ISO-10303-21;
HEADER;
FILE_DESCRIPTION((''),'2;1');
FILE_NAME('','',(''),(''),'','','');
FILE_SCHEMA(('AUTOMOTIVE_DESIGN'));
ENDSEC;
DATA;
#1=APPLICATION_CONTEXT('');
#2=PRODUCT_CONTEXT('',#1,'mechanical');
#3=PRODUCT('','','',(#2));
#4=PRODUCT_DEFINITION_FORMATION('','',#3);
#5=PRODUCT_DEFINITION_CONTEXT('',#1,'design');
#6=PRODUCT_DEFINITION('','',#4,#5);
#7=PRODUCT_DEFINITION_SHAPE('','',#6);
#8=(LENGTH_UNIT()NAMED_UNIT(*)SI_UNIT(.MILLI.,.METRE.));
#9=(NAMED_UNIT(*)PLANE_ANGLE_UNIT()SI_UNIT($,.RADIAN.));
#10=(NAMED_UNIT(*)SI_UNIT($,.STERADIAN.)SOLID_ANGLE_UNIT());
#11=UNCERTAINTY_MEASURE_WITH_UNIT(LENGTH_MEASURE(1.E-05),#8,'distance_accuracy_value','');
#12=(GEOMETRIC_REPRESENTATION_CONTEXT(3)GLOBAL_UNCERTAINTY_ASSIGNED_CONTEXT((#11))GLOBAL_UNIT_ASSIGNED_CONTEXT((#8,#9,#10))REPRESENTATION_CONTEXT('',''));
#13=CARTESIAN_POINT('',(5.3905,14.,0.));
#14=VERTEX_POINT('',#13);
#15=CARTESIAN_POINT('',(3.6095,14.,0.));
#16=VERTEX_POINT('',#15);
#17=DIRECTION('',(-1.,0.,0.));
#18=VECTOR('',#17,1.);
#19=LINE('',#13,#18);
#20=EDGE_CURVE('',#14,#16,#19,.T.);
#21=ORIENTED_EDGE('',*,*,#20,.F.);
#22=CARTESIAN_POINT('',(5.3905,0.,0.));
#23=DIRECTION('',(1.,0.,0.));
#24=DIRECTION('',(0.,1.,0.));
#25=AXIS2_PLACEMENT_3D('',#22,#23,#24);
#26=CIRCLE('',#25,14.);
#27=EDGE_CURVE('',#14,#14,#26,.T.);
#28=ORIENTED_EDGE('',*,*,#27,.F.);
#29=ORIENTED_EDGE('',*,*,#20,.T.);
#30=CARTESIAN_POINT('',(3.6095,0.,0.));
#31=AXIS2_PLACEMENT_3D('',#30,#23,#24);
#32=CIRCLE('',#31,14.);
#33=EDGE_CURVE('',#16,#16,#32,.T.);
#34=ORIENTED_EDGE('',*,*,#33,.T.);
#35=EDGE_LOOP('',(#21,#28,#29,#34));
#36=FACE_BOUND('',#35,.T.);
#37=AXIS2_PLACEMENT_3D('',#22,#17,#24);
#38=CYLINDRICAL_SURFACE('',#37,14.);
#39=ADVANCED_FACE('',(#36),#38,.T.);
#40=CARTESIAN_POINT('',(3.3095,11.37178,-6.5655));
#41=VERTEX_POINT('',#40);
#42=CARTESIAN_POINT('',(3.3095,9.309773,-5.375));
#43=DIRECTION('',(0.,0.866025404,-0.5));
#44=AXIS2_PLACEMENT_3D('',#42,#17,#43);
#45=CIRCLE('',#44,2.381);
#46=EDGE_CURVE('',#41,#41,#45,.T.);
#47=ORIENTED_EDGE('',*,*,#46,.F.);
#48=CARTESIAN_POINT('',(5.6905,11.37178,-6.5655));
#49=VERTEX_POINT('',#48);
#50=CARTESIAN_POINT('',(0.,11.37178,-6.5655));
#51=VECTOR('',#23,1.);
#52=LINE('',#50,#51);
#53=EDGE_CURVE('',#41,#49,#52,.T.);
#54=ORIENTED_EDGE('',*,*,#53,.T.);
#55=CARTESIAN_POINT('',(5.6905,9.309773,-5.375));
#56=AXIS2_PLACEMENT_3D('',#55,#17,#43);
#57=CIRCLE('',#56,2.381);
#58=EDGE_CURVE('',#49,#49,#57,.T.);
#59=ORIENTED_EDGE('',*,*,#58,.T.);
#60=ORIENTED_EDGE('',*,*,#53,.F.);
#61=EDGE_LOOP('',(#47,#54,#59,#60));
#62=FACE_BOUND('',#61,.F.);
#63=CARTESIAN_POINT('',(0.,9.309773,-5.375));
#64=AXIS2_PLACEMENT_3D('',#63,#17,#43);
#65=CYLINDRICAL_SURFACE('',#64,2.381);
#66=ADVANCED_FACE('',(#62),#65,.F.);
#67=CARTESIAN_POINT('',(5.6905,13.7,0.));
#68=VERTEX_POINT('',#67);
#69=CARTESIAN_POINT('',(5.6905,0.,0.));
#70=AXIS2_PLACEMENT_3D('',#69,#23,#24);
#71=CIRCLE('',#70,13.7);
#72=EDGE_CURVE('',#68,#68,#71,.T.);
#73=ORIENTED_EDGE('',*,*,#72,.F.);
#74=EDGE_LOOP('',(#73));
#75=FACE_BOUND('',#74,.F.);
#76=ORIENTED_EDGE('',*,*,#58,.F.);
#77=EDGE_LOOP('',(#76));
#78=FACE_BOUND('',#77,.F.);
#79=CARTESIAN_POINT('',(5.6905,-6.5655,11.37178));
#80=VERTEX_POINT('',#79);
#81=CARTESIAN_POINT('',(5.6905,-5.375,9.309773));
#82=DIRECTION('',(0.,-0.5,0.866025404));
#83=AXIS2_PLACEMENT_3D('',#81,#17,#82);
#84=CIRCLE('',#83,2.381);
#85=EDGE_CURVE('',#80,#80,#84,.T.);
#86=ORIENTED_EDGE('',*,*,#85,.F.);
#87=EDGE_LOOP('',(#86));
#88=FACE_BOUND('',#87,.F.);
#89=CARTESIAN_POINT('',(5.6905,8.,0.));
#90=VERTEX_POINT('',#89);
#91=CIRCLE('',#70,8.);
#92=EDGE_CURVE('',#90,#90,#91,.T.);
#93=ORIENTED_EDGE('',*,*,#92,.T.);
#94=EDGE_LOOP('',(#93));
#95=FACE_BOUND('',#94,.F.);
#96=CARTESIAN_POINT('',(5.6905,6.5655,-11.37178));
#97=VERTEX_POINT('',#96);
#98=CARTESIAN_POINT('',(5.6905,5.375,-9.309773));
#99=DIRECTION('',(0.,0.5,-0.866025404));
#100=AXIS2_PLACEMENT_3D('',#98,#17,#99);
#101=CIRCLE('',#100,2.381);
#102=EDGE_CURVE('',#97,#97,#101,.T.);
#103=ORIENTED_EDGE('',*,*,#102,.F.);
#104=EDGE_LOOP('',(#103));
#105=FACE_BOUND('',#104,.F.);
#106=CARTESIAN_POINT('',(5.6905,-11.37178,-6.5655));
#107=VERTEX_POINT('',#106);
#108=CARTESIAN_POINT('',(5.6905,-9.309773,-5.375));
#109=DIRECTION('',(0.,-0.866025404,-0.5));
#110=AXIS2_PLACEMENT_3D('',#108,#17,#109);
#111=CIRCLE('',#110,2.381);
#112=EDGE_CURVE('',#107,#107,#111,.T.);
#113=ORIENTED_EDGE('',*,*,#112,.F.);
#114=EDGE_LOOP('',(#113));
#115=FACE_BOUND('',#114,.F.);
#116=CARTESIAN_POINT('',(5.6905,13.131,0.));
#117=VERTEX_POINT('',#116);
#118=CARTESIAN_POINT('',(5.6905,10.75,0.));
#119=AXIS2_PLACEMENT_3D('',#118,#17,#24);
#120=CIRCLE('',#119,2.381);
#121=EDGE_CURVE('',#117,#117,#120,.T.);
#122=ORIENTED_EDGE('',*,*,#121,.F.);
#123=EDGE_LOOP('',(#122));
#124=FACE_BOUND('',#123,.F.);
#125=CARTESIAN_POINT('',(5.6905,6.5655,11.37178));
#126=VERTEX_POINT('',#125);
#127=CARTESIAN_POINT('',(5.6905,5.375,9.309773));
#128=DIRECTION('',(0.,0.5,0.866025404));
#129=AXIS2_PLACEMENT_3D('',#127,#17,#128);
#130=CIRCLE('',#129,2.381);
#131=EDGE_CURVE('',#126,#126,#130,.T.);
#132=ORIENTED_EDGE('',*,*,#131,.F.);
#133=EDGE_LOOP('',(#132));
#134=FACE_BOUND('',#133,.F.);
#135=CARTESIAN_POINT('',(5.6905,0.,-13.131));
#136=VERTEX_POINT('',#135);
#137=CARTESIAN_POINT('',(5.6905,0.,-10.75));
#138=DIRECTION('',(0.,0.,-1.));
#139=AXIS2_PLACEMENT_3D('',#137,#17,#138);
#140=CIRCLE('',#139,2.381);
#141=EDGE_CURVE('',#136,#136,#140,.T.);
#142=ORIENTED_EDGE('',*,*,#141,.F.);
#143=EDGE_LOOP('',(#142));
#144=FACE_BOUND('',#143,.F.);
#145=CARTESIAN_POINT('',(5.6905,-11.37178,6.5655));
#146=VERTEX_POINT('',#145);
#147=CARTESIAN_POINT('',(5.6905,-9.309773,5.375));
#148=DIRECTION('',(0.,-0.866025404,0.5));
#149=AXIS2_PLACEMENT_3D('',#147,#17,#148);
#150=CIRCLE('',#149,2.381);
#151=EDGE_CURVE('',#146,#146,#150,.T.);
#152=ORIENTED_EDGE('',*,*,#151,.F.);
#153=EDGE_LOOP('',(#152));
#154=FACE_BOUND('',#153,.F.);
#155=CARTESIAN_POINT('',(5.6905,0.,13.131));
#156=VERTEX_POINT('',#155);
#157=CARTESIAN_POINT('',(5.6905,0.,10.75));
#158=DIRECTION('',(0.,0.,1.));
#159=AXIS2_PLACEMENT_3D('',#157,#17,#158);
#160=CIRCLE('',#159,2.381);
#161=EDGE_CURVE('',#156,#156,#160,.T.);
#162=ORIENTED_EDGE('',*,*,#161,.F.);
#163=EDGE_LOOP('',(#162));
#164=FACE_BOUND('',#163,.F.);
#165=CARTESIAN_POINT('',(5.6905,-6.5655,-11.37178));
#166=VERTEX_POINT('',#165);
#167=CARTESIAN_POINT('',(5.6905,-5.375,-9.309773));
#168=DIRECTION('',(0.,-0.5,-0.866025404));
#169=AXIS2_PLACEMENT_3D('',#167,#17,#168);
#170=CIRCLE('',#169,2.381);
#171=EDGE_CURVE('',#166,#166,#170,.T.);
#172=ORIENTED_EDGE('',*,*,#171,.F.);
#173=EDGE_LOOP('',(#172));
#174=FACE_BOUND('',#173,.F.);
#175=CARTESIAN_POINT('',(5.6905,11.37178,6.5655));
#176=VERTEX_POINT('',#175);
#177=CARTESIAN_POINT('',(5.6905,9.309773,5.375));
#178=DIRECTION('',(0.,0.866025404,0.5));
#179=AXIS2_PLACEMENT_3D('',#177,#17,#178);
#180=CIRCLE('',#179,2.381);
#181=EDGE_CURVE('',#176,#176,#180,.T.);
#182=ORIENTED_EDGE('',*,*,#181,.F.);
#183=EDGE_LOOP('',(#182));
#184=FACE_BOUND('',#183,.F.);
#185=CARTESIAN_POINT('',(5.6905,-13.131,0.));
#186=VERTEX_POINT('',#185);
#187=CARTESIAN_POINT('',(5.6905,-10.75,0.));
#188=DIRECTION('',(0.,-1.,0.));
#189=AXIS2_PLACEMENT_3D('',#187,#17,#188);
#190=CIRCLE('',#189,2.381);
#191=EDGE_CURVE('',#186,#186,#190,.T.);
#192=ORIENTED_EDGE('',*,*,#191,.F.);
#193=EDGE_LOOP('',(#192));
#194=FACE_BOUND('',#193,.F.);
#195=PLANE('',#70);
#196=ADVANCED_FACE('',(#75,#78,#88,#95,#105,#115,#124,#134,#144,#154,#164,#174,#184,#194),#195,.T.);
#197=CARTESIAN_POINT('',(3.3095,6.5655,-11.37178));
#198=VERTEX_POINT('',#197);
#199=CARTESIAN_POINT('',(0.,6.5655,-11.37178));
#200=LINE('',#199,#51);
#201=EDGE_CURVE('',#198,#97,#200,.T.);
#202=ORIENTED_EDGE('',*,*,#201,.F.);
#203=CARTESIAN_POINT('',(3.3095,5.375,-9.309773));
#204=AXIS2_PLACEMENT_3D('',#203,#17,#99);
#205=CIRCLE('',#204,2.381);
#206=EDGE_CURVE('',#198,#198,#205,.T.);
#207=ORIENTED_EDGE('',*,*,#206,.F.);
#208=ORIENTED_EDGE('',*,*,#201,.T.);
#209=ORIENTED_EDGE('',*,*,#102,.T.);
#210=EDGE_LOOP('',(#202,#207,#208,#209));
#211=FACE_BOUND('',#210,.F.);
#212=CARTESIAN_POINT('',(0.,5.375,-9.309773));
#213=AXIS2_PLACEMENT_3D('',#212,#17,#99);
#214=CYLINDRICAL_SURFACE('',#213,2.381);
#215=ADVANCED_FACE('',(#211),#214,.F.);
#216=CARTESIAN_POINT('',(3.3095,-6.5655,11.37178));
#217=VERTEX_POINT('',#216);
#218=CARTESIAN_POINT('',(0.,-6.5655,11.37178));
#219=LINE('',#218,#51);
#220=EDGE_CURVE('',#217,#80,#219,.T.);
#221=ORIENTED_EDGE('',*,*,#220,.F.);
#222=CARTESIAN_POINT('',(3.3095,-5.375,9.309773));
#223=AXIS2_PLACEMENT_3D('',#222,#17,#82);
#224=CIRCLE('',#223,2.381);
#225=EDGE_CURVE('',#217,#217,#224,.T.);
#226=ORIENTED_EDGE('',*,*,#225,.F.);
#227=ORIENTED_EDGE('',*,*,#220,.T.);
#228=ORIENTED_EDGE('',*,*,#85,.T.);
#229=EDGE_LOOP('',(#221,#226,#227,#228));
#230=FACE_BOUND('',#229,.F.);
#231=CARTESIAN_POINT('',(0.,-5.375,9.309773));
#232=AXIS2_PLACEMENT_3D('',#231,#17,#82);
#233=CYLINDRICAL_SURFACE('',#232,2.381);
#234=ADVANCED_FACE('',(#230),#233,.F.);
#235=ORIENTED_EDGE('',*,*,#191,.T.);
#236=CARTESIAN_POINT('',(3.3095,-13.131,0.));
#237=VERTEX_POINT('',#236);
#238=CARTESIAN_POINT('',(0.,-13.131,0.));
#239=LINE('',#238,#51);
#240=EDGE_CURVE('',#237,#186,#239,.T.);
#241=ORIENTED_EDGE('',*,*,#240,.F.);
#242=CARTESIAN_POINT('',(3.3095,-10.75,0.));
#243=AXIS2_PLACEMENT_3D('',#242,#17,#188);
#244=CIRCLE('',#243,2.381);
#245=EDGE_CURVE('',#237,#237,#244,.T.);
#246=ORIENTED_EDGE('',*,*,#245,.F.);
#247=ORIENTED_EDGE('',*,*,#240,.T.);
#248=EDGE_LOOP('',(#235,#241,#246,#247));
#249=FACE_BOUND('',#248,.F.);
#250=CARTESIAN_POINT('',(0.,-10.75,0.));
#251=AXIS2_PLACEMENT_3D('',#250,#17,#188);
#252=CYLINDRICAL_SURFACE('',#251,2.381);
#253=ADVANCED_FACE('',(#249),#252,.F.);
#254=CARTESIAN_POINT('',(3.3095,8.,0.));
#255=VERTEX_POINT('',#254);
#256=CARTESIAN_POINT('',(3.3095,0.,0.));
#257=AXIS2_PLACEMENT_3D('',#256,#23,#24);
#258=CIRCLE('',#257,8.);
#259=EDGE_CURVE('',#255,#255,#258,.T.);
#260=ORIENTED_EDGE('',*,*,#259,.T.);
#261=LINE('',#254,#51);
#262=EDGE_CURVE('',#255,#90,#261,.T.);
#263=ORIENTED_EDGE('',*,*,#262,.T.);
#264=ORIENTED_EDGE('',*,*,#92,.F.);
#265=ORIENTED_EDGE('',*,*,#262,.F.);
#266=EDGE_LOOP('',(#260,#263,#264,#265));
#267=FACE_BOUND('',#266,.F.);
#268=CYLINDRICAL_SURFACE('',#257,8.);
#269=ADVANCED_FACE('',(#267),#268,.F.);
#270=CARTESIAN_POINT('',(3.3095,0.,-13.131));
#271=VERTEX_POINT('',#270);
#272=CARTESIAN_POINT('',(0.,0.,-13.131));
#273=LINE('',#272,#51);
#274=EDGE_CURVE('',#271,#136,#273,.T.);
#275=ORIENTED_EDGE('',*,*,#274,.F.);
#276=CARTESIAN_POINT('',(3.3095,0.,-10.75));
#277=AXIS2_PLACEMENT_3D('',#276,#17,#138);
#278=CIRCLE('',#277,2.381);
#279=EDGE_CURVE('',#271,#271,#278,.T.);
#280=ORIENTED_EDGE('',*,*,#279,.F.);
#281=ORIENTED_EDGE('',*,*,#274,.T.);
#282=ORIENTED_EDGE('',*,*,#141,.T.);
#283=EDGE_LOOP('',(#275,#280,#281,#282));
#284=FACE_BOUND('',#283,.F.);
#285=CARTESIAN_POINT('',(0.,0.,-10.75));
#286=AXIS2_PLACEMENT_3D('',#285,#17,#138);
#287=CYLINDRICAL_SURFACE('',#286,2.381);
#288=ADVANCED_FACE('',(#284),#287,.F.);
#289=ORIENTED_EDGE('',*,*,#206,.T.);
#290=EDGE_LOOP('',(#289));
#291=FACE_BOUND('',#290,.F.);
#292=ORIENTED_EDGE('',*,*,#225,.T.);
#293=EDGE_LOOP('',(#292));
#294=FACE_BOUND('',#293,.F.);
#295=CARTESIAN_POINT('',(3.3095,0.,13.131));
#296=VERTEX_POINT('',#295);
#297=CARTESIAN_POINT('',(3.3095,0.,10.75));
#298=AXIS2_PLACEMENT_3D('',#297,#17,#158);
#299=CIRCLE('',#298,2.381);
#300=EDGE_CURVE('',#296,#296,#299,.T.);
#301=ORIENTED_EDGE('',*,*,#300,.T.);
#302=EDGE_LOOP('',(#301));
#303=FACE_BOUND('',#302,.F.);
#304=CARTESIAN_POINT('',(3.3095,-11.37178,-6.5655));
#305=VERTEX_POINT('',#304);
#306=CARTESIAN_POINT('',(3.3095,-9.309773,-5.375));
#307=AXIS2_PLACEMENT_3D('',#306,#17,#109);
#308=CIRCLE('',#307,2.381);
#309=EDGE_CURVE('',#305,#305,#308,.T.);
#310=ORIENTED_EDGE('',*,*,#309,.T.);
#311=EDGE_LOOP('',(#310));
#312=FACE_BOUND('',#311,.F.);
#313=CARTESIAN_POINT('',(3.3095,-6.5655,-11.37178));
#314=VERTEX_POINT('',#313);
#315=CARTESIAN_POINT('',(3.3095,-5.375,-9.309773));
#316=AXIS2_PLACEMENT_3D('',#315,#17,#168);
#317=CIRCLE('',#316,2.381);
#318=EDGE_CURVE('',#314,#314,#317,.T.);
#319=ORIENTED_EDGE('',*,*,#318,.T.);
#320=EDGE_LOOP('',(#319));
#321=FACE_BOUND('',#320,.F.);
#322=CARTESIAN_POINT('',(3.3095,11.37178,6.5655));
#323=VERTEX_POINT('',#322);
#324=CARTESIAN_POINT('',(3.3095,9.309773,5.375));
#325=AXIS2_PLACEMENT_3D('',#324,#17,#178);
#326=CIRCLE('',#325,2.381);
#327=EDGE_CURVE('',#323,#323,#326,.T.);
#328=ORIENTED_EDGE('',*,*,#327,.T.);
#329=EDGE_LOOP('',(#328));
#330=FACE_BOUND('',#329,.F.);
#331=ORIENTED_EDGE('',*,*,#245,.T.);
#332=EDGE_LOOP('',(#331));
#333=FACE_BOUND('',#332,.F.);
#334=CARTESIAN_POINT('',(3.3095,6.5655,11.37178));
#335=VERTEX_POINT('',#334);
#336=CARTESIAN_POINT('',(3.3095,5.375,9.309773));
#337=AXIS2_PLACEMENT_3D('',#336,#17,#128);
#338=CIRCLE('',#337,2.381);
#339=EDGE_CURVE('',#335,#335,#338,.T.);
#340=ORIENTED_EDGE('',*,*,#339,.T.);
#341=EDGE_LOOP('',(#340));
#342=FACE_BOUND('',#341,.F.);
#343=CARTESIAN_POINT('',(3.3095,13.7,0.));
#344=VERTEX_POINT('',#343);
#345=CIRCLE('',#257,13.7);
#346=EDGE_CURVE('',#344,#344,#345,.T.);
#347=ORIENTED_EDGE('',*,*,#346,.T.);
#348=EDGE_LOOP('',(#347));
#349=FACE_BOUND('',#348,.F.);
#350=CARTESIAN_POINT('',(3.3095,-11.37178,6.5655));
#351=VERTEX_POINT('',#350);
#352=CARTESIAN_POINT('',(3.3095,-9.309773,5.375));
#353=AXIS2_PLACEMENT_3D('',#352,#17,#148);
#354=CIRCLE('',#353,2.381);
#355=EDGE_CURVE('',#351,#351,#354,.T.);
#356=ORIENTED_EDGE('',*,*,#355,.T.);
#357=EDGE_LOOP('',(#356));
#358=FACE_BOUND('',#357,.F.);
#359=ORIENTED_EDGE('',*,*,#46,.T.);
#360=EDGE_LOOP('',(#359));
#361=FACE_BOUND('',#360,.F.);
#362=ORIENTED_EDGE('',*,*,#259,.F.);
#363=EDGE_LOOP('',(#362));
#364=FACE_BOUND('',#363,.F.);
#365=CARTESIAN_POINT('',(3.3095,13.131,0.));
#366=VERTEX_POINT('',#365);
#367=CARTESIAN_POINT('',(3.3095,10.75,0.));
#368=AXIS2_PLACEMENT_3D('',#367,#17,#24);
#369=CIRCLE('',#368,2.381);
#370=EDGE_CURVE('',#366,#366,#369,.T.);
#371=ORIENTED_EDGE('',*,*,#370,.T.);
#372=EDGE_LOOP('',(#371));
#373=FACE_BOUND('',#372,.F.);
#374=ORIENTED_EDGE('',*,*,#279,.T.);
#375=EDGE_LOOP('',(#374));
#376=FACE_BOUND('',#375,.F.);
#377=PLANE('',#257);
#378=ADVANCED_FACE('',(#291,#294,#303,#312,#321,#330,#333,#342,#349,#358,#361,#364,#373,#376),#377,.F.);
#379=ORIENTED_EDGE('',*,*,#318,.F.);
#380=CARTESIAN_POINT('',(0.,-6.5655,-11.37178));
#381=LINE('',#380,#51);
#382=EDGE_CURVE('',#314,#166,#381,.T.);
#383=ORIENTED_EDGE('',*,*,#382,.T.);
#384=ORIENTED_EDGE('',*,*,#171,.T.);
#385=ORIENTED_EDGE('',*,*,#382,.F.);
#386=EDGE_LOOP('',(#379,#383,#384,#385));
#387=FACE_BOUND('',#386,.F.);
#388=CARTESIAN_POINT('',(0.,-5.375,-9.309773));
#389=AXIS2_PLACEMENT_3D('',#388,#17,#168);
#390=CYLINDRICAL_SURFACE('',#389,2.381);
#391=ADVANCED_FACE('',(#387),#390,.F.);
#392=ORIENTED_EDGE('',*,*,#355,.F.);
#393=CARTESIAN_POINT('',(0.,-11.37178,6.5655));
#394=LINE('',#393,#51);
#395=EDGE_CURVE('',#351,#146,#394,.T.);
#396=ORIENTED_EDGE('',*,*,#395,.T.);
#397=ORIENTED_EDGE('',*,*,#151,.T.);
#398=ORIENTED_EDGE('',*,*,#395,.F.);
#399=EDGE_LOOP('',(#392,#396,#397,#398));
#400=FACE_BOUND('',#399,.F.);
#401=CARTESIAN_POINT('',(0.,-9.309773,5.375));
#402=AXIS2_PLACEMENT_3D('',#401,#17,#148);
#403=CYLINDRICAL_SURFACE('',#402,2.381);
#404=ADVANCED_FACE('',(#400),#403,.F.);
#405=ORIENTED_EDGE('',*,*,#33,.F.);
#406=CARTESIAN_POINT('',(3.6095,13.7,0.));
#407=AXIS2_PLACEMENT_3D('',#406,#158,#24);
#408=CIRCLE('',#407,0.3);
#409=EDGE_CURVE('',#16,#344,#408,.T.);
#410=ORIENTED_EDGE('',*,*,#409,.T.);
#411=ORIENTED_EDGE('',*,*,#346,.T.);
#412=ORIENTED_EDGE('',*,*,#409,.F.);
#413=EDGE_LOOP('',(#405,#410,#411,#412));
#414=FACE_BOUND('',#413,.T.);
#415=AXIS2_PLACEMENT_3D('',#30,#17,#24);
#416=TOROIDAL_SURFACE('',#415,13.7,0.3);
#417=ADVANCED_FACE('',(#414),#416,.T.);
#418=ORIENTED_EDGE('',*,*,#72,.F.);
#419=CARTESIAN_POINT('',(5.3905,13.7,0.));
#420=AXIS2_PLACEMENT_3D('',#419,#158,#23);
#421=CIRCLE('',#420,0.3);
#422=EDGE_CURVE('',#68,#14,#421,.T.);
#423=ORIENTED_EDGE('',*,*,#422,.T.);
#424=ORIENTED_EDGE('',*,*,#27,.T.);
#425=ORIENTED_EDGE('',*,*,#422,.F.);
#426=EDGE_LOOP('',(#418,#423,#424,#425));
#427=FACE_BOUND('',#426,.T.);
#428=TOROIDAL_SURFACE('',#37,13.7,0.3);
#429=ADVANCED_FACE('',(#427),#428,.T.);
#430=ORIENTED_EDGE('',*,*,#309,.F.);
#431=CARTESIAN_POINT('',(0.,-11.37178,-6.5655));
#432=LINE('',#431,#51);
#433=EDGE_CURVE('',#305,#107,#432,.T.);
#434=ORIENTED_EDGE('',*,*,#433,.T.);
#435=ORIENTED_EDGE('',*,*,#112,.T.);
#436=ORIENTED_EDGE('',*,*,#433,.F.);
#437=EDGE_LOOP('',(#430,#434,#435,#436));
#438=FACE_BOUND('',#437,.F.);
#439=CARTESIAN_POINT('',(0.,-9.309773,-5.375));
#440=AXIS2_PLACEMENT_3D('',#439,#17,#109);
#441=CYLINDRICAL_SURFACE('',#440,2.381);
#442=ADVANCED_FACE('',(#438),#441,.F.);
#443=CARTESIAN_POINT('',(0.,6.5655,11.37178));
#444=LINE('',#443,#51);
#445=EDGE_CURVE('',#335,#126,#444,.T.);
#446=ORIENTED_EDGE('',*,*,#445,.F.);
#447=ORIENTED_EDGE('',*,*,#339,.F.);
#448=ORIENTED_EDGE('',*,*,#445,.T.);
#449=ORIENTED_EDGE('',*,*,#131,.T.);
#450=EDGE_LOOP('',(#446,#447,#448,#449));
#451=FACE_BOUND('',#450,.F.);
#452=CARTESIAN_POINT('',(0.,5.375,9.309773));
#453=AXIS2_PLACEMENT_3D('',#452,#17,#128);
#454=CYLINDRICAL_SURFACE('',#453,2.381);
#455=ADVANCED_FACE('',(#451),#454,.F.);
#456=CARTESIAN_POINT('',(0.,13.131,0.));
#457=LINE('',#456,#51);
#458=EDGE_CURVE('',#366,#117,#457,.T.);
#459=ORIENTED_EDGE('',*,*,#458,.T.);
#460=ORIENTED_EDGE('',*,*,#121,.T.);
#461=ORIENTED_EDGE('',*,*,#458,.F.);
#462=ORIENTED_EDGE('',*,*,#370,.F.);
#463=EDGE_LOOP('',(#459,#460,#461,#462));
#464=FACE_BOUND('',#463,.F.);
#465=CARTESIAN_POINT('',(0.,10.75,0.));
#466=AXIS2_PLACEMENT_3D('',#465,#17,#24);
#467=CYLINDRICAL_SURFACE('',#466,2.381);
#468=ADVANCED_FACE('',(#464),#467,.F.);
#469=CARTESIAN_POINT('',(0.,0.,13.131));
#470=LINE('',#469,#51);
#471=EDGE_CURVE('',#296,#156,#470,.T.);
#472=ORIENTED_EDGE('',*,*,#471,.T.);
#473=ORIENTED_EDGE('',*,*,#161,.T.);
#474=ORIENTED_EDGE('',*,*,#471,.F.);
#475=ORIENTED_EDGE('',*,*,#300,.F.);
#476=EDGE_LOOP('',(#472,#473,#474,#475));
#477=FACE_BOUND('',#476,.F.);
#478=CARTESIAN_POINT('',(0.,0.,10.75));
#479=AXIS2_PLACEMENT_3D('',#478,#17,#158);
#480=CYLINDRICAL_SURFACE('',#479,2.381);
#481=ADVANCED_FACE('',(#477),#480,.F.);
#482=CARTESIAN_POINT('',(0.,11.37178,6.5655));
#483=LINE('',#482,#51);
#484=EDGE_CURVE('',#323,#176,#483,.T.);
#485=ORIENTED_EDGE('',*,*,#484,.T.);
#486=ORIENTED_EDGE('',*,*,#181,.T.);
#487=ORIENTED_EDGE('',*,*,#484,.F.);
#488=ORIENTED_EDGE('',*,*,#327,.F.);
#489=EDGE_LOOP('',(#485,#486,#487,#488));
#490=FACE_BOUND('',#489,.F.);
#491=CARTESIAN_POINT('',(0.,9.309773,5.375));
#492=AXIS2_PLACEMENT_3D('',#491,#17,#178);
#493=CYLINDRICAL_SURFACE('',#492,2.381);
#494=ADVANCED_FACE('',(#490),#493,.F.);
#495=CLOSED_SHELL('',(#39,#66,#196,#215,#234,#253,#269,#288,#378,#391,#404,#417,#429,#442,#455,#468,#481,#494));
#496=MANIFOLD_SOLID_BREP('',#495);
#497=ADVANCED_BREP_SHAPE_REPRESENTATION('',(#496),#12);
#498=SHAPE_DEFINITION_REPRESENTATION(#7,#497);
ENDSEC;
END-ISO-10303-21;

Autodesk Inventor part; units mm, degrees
ref_plane "YZ Plane" through (0, 0, 0) normal (1, 0, 0) x (0, 1, 0)
ref_plane "XZ Plane" through (0, 0, 0) normal (0, 1, 0) x (-1, 0, 0)
ref_plane "XY Plane" through (0, 0, 0) normal (0, 0, 1) x (1, 0, 0)
sketch "Sketch_1" plane through (0, 0, 0) normal (0, 0, 1) x (1, 0, 0)
  line L0 (5.6905, 0) -> (3.3095, 0)
  line L1 (3.3095, 13.7) -> (3.3095, 8)
  line L2 (3.3095, 8) -> (5.6905, 8)
  line L3 (5.6905, 8) -> (5.6905, 13.7)
  arc A0 (5.6905, 13.7) -> (5.3905, 14) centre (5.3905, 13.7) ccw
  line L4 (5.3905, 14) -> (3.6095, 14)
  arc A1 (3.6095, 14) -> (3.3095, 13.7) centre (3.6095, 13.7) ccw
revolve "Revolution1" add sketch "Sketch_1" angle 360 about axis through (5.6905, 0, 0) along (1, 0, 0)
sketch "Sketch_2" plane through (0, 0, 0) normal (1, 0, 0) x (0, 1, 0)
  circle A0 centre (10.75, 0) radius 2.381
extrude "Extrusion1" cut sketch "Sketch_2" along normal blind 9
pattern_circular "Circular Pattern1" count 12 over 360 about axis through (0, 0, 0) along (1, 0, 0) of "Extrusion1"
properties part number "SKF_51102_PART1"
